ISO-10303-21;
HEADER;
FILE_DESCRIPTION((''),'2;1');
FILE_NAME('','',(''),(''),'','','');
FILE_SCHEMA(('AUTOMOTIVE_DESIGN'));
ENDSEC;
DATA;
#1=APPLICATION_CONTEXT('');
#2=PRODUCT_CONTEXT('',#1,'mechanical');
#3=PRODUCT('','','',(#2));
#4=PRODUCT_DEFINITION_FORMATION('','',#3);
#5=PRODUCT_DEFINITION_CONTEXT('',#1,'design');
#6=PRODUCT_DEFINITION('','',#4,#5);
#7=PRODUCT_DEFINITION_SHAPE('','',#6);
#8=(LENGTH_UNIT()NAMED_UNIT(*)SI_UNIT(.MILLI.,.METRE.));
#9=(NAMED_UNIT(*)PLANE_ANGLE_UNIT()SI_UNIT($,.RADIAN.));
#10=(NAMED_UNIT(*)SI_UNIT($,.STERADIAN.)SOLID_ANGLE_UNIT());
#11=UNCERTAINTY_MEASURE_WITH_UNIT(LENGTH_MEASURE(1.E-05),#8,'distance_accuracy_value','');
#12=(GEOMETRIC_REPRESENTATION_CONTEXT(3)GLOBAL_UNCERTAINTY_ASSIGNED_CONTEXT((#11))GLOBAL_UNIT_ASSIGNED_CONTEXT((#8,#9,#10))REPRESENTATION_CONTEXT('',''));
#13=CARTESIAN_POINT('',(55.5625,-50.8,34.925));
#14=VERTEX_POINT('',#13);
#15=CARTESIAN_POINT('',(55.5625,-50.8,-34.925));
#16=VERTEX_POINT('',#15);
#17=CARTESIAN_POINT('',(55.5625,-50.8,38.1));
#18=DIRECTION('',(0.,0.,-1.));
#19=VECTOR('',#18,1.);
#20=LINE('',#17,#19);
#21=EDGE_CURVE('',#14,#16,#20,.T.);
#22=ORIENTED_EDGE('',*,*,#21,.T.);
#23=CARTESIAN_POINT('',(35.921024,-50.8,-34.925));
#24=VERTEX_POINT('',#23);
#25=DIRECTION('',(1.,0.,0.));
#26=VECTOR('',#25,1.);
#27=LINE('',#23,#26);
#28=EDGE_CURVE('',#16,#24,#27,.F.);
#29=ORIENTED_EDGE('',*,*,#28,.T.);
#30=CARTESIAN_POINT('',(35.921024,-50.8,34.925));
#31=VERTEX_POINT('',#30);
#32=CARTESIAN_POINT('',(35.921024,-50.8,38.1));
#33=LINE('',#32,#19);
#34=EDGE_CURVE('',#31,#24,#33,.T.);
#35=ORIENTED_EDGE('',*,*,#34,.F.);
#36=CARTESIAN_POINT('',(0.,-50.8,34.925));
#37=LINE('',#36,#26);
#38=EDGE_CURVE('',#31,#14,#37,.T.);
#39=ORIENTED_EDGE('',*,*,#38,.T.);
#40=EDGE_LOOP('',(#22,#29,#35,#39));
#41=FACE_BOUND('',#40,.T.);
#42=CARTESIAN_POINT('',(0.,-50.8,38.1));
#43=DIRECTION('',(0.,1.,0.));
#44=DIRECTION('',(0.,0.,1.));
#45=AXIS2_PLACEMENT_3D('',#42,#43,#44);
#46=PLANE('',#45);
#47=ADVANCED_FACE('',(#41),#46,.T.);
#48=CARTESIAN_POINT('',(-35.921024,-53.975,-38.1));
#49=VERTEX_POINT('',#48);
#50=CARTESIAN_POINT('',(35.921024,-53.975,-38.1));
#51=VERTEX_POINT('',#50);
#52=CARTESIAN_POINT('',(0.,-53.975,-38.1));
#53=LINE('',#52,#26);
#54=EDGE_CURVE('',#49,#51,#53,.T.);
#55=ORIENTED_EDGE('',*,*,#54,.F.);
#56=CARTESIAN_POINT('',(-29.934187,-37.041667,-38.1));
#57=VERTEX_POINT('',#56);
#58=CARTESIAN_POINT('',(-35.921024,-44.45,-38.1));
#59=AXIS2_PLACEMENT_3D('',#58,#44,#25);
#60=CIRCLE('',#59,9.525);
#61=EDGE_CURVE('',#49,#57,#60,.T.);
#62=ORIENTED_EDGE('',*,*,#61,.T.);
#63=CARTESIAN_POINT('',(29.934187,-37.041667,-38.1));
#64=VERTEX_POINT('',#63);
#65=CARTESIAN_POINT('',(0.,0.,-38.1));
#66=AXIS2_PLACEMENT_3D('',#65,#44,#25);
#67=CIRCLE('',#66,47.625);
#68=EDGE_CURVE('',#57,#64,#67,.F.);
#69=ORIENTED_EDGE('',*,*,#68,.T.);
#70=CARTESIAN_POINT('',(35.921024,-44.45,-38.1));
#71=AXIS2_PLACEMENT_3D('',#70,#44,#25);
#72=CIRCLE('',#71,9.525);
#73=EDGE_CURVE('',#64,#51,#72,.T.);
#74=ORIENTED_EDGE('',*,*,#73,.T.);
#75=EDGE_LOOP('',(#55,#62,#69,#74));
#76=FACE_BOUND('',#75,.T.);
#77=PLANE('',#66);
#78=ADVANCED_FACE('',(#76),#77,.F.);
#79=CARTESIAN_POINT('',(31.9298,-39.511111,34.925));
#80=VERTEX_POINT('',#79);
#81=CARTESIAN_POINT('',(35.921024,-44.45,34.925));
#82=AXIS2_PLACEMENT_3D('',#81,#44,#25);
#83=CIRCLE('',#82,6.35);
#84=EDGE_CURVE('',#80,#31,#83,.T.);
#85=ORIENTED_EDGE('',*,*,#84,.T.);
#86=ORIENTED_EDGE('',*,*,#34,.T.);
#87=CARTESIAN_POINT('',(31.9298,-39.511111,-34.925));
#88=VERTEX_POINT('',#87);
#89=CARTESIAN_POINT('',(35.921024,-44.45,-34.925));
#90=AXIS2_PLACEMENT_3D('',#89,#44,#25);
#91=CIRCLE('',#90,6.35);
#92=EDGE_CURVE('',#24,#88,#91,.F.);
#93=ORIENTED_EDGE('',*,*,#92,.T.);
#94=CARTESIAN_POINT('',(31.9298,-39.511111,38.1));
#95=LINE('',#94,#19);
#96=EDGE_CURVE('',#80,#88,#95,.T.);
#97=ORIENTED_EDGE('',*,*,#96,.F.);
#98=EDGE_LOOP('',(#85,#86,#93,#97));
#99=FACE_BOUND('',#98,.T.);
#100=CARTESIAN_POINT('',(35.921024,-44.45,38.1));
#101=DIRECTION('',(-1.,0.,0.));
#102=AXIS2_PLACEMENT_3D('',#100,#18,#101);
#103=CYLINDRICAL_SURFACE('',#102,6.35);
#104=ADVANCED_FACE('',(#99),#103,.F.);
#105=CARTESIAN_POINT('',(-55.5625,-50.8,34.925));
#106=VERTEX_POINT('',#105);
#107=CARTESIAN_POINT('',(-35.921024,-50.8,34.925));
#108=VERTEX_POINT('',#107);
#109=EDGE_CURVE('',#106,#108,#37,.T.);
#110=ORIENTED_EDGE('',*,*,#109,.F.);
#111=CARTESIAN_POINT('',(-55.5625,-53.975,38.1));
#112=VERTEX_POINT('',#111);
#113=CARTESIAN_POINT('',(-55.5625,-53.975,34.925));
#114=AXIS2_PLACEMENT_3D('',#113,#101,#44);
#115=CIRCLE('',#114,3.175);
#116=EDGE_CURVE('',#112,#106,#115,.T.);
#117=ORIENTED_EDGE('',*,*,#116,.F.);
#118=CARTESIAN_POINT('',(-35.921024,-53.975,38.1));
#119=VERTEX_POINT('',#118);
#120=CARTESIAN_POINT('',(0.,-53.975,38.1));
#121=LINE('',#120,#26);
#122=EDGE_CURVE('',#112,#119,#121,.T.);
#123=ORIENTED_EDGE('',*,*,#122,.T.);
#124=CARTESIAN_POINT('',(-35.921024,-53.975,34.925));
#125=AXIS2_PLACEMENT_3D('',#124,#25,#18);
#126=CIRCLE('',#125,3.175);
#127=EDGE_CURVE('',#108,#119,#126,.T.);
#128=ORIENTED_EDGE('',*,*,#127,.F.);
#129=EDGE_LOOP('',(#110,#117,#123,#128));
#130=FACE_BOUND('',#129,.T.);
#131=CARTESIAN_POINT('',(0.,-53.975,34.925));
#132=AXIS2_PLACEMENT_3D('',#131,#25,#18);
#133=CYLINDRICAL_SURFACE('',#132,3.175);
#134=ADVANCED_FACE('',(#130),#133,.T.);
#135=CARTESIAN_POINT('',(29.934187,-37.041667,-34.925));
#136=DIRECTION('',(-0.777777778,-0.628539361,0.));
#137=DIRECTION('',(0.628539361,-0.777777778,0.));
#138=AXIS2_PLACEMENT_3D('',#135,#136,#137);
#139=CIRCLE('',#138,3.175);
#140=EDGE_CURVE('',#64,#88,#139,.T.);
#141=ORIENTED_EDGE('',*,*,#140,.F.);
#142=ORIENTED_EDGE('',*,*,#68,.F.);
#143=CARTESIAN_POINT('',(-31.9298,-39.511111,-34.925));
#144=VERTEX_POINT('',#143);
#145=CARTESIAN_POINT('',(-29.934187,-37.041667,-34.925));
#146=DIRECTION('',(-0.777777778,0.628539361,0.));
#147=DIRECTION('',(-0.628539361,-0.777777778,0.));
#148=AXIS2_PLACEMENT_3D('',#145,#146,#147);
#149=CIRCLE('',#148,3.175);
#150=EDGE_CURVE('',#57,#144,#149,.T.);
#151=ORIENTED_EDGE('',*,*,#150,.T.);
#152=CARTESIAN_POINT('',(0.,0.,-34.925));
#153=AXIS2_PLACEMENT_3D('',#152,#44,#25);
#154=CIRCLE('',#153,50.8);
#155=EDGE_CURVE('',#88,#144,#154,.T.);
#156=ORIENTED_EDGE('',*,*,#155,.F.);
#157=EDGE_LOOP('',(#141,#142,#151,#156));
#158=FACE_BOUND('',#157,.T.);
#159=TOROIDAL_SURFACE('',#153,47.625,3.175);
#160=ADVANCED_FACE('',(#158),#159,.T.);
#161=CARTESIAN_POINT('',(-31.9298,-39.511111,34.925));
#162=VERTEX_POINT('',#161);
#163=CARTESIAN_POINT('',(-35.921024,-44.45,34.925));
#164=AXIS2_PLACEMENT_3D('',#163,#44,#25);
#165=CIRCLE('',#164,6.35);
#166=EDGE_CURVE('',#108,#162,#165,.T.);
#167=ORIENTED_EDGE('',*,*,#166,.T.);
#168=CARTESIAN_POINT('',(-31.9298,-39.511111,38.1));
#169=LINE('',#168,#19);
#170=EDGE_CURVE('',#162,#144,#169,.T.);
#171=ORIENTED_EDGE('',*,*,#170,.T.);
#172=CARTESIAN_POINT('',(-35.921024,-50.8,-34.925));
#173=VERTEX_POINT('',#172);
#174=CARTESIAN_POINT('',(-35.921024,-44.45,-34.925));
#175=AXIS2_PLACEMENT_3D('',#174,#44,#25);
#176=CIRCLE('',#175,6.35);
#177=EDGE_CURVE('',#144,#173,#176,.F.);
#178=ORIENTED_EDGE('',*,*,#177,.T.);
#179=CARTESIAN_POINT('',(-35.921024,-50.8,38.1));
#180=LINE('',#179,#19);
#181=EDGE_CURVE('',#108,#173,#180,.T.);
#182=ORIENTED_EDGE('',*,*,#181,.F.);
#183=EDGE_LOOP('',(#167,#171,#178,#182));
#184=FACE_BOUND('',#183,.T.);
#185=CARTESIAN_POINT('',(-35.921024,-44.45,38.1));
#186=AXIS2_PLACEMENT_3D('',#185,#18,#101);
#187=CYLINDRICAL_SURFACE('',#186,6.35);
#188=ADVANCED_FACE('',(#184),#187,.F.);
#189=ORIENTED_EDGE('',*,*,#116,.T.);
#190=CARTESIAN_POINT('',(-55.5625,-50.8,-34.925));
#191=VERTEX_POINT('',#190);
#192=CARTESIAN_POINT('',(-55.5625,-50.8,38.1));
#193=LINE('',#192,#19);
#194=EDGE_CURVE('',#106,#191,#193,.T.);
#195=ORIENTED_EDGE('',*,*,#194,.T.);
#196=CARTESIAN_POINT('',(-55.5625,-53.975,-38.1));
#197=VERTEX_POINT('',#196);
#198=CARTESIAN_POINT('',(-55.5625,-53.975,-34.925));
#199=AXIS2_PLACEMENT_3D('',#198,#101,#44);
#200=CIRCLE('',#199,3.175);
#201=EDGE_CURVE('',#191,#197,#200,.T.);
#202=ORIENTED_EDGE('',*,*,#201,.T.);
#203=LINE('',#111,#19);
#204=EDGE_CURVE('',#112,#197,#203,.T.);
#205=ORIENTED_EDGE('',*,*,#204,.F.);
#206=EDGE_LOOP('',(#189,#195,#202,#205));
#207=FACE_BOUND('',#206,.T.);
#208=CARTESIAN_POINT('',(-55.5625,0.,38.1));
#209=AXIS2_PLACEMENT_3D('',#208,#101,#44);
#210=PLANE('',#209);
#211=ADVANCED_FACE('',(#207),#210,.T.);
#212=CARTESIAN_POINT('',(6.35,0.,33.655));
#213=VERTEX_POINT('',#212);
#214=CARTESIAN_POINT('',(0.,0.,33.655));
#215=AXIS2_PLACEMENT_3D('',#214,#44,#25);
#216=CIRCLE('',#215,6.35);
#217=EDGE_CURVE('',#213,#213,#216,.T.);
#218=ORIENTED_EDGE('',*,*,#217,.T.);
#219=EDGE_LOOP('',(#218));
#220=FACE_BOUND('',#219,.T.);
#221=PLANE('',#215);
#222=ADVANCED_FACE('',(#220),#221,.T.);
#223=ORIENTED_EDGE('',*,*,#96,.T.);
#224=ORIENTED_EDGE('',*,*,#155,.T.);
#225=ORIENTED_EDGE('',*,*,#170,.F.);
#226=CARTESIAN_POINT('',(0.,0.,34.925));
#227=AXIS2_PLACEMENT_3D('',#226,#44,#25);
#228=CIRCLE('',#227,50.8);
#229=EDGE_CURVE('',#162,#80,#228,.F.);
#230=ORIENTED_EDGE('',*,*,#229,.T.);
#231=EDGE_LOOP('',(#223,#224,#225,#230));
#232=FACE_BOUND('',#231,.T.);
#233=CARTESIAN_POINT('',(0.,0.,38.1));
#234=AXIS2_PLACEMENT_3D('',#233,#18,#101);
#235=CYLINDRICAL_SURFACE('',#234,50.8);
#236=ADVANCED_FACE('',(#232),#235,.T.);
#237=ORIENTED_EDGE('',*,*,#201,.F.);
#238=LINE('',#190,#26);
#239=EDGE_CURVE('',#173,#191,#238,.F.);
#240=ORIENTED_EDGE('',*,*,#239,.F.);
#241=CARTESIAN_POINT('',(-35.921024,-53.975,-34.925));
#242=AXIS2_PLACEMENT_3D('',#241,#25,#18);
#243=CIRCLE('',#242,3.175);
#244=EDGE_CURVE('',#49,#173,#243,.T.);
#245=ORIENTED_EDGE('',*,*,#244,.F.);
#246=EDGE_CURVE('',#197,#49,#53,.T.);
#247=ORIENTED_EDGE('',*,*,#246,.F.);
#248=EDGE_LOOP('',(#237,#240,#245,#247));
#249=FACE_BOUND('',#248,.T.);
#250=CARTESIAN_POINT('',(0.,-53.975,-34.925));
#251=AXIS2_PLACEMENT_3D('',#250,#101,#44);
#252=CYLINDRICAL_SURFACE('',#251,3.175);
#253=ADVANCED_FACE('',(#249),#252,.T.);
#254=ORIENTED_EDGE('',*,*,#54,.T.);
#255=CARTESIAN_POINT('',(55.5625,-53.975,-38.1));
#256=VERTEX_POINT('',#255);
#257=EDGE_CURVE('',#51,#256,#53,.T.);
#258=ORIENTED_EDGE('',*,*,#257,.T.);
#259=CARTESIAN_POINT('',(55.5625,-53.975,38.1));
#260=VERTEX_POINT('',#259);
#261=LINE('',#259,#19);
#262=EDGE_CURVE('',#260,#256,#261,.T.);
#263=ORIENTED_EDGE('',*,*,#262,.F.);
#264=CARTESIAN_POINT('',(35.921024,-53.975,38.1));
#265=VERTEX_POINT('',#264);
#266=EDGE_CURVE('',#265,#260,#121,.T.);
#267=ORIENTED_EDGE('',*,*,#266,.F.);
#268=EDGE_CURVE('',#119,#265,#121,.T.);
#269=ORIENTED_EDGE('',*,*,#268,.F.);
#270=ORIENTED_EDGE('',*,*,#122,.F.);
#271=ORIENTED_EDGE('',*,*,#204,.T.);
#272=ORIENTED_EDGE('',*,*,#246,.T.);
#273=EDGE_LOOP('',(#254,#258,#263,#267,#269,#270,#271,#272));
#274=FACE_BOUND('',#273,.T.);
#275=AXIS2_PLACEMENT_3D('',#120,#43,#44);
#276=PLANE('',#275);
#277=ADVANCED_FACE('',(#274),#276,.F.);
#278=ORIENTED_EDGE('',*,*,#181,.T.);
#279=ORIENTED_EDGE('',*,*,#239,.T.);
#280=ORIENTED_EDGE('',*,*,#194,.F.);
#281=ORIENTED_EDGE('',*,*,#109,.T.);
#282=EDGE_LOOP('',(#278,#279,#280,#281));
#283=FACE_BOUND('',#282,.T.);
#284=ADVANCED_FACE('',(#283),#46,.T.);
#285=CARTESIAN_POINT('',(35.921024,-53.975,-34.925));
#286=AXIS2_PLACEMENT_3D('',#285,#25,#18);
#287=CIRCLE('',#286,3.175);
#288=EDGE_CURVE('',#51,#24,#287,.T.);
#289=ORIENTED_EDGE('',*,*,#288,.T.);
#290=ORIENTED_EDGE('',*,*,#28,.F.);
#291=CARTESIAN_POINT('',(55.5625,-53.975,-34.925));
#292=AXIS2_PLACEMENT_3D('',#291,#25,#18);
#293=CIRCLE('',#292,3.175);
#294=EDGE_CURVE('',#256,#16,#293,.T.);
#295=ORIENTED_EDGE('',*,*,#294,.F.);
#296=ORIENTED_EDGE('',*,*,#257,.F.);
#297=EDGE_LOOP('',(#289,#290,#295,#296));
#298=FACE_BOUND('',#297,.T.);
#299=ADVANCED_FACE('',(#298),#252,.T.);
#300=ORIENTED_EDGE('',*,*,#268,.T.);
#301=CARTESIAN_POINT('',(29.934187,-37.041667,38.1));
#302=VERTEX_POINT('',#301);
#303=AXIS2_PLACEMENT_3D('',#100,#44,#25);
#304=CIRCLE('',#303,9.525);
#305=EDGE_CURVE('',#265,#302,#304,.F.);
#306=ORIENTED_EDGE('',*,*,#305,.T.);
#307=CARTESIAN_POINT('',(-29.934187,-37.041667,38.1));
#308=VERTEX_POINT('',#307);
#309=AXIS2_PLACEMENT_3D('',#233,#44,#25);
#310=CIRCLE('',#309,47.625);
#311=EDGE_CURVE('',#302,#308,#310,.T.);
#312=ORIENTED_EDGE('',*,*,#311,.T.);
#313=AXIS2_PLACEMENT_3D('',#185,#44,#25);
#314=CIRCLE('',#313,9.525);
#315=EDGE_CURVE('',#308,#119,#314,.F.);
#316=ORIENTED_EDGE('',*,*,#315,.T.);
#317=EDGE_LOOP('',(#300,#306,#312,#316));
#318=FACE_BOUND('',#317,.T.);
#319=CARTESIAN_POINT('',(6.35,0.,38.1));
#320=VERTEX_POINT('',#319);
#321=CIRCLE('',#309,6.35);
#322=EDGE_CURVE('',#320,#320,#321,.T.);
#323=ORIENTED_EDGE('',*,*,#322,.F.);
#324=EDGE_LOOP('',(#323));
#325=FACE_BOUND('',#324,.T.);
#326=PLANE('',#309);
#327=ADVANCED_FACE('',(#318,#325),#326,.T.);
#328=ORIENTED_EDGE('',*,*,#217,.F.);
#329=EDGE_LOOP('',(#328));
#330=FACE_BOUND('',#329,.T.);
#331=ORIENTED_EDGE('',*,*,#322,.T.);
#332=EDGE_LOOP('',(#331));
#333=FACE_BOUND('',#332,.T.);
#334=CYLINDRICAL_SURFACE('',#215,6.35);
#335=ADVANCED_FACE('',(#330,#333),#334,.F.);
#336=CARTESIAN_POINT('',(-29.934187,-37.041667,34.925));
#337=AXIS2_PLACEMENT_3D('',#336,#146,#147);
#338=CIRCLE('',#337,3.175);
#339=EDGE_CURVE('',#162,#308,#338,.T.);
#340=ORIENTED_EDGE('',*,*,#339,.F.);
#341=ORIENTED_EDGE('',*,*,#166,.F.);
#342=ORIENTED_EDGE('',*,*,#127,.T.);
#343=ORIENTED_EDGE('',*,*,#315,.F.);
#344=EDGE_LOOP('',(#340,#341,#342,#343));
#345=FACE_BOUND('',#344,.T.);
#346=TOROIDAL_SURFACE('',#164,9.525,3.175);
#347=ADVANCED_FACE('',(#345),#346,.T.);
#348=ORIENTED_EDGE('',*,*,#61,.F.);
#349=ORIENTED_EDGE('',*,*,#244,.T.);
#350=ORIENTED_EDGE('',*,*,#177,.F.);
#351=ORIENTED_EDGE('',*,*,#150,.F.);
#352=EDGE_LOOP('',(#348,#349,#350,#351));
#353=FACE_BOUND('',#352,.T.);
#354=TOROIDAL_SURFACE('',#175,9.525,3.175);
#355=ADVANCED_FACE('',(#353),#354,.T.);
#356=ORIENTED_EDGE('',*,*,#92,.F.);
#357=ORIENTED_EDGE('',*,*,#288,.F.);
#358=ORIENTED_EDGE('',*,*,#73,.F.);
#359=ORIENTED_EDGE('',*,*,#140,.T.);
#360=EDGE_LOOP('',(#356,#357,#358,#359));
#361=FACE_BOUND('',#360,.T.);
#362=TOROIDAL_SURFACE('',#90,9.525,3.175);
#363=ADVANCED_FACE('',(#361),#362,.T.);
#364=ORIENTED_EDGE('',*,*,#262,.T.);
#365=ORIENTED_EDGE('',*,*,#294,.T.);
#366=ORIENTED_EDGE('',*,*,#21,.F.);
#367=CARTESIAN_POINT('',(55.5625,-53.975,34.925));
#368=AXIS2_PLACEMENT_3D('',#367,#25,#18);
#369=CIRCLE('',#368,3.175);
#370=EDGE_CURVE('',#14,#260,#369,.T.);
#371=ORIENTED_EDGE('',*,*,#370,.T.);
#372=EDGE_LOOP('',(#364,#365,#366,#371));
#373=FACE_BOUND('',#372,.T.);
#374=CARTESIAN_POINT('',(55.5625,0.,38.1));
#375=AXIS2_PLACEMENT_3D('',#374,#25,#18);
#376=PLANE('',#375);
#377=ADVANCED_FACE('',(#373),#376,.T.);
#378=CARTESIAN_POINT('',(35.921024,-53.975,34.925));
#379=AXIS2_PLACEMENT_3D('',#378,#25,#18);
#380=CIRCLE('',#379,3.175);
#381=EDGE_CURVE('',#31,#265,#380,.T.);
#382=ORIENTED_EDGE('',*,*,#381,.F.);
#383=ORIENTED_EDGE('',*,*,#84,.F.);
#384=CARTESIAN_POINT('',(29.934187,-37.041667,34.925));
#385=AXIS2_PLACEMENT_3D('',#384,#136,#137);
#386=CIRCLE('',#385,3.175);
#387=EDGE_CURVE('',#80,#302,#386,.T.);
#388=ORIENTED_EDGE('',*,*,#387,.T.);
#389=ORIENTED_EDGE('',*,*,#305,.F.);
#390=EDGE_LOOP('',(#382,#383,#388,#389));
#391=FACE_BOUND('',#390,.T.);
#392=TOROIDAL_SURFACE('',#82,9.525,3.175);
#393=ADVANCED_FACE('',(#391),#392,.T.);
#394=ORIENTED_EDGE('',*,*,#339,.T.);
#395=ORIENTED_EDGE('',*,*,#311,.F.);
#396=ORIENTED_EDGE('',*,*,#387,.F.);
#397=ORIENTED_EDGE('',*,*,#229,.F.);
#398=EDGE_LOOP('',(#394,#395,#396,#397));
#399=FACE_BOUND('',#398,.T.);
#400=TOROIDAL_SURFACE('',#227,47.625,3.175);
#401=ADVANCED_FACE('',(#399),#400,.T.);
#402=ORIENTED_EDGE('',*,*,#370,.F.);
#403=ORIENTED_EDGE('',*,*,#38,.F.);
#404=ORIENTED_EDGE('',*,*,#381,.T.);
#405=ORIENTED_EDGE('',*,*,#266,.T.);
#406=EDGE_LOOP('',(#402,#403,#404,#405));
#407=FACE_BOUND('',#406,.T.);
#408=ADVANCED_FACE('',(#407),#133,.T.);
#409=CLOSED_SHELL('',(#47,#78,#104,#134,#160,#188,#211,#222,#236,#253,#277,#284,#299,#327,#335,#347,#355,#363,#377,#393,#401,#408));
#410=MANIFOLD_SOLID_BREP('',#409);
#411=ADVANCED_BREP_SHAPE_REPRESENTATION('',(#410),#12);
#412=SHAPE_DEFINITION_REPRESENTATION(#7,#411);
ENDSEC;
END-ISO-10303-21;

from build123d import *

# Parameters (mm, degrees)
SKETCH1_R           = 50.8
SKETCH1_W           = 111.125
SKETCH1_H           = 3.175
BOSS_EXTRUDE1_DEPTH = 38.1
SKETCH2_R           = 6.35
CUT_EXTRUDE1_DEPTH  = 4.445
FILLET1_R           = 3.175


with BuildPart() as part:
    # Sketch1 → Boss-Extrude1 (new, symmetric)
    with BuildSketch(Plane.XY):
        Circle(SKETCH1_R)
        with BuildLine():
            ThreePointArc((-31.929799542, -39.511111111), (-29.93418707, -46.566666667), (-35.921024484, -50.8))
            Line((-35.921024484, -50.8), (7.4e-08, -50.8))
            ThreePointArc((7.4e-08, -50.8), (-16.933333298, -47.894699325), (-31.929799542, -39.511111111))
        make_face()
        with BuildLine():
            Line((7.4e-08, -50.8), (35.921024484, -50.8))
            ThreePointArc((35.921024484, -50.8), (29.93418707, -46.566666667), (31.929799542, -39.511111111))
            ThreePointArc((31.929799542, -39.511111111), (16.933333368, -47.8946993), (7.4e-08, -50.8))
        make_face()
        with Locations((0, -52.3875)):
            Rectangle(SKETCH1_W, SKETCH1_H)
    extrude(amount=BOSS_EXTRUDE1_DEPTH, both=True)

    # Sketch2 → Cut-Extrude1 (cut)
    with BuildSketch(Plane.XY.offset(38.1)):
        Circle(SKETCH2_R)
    extrude(amount=-CUT_EXTRUDE1_DEPTH, mode=Mode.SUBTRACT)

    # Fillet1
    fillet1_edges = [part.edges().sort_by_distance(p)[0] for p in [
        (45.741762242, -50.8, -38.1),
        (45.741762242, -50.8, 38.1),
        (29.93418707, -46.566666667, -38.1),
        (29.93418707, -46.566666667, 38.1),
        (-45.741762242, -50.8, -38.1),
        (-45.741762242, -50.8, 38.1),
        (-29.93418707, -46.566666667, -38.1),
        (-29.93418707, -46.566666667, 38.1),
        (0, 50.8, -38.1),
        (0, 50.8, 38.1),
    ]]
    fillet(fillet1_edges, radius=FILLET1_R - 0.0001)  # a hair under: the kernel refuses the full size


solid = part.part
